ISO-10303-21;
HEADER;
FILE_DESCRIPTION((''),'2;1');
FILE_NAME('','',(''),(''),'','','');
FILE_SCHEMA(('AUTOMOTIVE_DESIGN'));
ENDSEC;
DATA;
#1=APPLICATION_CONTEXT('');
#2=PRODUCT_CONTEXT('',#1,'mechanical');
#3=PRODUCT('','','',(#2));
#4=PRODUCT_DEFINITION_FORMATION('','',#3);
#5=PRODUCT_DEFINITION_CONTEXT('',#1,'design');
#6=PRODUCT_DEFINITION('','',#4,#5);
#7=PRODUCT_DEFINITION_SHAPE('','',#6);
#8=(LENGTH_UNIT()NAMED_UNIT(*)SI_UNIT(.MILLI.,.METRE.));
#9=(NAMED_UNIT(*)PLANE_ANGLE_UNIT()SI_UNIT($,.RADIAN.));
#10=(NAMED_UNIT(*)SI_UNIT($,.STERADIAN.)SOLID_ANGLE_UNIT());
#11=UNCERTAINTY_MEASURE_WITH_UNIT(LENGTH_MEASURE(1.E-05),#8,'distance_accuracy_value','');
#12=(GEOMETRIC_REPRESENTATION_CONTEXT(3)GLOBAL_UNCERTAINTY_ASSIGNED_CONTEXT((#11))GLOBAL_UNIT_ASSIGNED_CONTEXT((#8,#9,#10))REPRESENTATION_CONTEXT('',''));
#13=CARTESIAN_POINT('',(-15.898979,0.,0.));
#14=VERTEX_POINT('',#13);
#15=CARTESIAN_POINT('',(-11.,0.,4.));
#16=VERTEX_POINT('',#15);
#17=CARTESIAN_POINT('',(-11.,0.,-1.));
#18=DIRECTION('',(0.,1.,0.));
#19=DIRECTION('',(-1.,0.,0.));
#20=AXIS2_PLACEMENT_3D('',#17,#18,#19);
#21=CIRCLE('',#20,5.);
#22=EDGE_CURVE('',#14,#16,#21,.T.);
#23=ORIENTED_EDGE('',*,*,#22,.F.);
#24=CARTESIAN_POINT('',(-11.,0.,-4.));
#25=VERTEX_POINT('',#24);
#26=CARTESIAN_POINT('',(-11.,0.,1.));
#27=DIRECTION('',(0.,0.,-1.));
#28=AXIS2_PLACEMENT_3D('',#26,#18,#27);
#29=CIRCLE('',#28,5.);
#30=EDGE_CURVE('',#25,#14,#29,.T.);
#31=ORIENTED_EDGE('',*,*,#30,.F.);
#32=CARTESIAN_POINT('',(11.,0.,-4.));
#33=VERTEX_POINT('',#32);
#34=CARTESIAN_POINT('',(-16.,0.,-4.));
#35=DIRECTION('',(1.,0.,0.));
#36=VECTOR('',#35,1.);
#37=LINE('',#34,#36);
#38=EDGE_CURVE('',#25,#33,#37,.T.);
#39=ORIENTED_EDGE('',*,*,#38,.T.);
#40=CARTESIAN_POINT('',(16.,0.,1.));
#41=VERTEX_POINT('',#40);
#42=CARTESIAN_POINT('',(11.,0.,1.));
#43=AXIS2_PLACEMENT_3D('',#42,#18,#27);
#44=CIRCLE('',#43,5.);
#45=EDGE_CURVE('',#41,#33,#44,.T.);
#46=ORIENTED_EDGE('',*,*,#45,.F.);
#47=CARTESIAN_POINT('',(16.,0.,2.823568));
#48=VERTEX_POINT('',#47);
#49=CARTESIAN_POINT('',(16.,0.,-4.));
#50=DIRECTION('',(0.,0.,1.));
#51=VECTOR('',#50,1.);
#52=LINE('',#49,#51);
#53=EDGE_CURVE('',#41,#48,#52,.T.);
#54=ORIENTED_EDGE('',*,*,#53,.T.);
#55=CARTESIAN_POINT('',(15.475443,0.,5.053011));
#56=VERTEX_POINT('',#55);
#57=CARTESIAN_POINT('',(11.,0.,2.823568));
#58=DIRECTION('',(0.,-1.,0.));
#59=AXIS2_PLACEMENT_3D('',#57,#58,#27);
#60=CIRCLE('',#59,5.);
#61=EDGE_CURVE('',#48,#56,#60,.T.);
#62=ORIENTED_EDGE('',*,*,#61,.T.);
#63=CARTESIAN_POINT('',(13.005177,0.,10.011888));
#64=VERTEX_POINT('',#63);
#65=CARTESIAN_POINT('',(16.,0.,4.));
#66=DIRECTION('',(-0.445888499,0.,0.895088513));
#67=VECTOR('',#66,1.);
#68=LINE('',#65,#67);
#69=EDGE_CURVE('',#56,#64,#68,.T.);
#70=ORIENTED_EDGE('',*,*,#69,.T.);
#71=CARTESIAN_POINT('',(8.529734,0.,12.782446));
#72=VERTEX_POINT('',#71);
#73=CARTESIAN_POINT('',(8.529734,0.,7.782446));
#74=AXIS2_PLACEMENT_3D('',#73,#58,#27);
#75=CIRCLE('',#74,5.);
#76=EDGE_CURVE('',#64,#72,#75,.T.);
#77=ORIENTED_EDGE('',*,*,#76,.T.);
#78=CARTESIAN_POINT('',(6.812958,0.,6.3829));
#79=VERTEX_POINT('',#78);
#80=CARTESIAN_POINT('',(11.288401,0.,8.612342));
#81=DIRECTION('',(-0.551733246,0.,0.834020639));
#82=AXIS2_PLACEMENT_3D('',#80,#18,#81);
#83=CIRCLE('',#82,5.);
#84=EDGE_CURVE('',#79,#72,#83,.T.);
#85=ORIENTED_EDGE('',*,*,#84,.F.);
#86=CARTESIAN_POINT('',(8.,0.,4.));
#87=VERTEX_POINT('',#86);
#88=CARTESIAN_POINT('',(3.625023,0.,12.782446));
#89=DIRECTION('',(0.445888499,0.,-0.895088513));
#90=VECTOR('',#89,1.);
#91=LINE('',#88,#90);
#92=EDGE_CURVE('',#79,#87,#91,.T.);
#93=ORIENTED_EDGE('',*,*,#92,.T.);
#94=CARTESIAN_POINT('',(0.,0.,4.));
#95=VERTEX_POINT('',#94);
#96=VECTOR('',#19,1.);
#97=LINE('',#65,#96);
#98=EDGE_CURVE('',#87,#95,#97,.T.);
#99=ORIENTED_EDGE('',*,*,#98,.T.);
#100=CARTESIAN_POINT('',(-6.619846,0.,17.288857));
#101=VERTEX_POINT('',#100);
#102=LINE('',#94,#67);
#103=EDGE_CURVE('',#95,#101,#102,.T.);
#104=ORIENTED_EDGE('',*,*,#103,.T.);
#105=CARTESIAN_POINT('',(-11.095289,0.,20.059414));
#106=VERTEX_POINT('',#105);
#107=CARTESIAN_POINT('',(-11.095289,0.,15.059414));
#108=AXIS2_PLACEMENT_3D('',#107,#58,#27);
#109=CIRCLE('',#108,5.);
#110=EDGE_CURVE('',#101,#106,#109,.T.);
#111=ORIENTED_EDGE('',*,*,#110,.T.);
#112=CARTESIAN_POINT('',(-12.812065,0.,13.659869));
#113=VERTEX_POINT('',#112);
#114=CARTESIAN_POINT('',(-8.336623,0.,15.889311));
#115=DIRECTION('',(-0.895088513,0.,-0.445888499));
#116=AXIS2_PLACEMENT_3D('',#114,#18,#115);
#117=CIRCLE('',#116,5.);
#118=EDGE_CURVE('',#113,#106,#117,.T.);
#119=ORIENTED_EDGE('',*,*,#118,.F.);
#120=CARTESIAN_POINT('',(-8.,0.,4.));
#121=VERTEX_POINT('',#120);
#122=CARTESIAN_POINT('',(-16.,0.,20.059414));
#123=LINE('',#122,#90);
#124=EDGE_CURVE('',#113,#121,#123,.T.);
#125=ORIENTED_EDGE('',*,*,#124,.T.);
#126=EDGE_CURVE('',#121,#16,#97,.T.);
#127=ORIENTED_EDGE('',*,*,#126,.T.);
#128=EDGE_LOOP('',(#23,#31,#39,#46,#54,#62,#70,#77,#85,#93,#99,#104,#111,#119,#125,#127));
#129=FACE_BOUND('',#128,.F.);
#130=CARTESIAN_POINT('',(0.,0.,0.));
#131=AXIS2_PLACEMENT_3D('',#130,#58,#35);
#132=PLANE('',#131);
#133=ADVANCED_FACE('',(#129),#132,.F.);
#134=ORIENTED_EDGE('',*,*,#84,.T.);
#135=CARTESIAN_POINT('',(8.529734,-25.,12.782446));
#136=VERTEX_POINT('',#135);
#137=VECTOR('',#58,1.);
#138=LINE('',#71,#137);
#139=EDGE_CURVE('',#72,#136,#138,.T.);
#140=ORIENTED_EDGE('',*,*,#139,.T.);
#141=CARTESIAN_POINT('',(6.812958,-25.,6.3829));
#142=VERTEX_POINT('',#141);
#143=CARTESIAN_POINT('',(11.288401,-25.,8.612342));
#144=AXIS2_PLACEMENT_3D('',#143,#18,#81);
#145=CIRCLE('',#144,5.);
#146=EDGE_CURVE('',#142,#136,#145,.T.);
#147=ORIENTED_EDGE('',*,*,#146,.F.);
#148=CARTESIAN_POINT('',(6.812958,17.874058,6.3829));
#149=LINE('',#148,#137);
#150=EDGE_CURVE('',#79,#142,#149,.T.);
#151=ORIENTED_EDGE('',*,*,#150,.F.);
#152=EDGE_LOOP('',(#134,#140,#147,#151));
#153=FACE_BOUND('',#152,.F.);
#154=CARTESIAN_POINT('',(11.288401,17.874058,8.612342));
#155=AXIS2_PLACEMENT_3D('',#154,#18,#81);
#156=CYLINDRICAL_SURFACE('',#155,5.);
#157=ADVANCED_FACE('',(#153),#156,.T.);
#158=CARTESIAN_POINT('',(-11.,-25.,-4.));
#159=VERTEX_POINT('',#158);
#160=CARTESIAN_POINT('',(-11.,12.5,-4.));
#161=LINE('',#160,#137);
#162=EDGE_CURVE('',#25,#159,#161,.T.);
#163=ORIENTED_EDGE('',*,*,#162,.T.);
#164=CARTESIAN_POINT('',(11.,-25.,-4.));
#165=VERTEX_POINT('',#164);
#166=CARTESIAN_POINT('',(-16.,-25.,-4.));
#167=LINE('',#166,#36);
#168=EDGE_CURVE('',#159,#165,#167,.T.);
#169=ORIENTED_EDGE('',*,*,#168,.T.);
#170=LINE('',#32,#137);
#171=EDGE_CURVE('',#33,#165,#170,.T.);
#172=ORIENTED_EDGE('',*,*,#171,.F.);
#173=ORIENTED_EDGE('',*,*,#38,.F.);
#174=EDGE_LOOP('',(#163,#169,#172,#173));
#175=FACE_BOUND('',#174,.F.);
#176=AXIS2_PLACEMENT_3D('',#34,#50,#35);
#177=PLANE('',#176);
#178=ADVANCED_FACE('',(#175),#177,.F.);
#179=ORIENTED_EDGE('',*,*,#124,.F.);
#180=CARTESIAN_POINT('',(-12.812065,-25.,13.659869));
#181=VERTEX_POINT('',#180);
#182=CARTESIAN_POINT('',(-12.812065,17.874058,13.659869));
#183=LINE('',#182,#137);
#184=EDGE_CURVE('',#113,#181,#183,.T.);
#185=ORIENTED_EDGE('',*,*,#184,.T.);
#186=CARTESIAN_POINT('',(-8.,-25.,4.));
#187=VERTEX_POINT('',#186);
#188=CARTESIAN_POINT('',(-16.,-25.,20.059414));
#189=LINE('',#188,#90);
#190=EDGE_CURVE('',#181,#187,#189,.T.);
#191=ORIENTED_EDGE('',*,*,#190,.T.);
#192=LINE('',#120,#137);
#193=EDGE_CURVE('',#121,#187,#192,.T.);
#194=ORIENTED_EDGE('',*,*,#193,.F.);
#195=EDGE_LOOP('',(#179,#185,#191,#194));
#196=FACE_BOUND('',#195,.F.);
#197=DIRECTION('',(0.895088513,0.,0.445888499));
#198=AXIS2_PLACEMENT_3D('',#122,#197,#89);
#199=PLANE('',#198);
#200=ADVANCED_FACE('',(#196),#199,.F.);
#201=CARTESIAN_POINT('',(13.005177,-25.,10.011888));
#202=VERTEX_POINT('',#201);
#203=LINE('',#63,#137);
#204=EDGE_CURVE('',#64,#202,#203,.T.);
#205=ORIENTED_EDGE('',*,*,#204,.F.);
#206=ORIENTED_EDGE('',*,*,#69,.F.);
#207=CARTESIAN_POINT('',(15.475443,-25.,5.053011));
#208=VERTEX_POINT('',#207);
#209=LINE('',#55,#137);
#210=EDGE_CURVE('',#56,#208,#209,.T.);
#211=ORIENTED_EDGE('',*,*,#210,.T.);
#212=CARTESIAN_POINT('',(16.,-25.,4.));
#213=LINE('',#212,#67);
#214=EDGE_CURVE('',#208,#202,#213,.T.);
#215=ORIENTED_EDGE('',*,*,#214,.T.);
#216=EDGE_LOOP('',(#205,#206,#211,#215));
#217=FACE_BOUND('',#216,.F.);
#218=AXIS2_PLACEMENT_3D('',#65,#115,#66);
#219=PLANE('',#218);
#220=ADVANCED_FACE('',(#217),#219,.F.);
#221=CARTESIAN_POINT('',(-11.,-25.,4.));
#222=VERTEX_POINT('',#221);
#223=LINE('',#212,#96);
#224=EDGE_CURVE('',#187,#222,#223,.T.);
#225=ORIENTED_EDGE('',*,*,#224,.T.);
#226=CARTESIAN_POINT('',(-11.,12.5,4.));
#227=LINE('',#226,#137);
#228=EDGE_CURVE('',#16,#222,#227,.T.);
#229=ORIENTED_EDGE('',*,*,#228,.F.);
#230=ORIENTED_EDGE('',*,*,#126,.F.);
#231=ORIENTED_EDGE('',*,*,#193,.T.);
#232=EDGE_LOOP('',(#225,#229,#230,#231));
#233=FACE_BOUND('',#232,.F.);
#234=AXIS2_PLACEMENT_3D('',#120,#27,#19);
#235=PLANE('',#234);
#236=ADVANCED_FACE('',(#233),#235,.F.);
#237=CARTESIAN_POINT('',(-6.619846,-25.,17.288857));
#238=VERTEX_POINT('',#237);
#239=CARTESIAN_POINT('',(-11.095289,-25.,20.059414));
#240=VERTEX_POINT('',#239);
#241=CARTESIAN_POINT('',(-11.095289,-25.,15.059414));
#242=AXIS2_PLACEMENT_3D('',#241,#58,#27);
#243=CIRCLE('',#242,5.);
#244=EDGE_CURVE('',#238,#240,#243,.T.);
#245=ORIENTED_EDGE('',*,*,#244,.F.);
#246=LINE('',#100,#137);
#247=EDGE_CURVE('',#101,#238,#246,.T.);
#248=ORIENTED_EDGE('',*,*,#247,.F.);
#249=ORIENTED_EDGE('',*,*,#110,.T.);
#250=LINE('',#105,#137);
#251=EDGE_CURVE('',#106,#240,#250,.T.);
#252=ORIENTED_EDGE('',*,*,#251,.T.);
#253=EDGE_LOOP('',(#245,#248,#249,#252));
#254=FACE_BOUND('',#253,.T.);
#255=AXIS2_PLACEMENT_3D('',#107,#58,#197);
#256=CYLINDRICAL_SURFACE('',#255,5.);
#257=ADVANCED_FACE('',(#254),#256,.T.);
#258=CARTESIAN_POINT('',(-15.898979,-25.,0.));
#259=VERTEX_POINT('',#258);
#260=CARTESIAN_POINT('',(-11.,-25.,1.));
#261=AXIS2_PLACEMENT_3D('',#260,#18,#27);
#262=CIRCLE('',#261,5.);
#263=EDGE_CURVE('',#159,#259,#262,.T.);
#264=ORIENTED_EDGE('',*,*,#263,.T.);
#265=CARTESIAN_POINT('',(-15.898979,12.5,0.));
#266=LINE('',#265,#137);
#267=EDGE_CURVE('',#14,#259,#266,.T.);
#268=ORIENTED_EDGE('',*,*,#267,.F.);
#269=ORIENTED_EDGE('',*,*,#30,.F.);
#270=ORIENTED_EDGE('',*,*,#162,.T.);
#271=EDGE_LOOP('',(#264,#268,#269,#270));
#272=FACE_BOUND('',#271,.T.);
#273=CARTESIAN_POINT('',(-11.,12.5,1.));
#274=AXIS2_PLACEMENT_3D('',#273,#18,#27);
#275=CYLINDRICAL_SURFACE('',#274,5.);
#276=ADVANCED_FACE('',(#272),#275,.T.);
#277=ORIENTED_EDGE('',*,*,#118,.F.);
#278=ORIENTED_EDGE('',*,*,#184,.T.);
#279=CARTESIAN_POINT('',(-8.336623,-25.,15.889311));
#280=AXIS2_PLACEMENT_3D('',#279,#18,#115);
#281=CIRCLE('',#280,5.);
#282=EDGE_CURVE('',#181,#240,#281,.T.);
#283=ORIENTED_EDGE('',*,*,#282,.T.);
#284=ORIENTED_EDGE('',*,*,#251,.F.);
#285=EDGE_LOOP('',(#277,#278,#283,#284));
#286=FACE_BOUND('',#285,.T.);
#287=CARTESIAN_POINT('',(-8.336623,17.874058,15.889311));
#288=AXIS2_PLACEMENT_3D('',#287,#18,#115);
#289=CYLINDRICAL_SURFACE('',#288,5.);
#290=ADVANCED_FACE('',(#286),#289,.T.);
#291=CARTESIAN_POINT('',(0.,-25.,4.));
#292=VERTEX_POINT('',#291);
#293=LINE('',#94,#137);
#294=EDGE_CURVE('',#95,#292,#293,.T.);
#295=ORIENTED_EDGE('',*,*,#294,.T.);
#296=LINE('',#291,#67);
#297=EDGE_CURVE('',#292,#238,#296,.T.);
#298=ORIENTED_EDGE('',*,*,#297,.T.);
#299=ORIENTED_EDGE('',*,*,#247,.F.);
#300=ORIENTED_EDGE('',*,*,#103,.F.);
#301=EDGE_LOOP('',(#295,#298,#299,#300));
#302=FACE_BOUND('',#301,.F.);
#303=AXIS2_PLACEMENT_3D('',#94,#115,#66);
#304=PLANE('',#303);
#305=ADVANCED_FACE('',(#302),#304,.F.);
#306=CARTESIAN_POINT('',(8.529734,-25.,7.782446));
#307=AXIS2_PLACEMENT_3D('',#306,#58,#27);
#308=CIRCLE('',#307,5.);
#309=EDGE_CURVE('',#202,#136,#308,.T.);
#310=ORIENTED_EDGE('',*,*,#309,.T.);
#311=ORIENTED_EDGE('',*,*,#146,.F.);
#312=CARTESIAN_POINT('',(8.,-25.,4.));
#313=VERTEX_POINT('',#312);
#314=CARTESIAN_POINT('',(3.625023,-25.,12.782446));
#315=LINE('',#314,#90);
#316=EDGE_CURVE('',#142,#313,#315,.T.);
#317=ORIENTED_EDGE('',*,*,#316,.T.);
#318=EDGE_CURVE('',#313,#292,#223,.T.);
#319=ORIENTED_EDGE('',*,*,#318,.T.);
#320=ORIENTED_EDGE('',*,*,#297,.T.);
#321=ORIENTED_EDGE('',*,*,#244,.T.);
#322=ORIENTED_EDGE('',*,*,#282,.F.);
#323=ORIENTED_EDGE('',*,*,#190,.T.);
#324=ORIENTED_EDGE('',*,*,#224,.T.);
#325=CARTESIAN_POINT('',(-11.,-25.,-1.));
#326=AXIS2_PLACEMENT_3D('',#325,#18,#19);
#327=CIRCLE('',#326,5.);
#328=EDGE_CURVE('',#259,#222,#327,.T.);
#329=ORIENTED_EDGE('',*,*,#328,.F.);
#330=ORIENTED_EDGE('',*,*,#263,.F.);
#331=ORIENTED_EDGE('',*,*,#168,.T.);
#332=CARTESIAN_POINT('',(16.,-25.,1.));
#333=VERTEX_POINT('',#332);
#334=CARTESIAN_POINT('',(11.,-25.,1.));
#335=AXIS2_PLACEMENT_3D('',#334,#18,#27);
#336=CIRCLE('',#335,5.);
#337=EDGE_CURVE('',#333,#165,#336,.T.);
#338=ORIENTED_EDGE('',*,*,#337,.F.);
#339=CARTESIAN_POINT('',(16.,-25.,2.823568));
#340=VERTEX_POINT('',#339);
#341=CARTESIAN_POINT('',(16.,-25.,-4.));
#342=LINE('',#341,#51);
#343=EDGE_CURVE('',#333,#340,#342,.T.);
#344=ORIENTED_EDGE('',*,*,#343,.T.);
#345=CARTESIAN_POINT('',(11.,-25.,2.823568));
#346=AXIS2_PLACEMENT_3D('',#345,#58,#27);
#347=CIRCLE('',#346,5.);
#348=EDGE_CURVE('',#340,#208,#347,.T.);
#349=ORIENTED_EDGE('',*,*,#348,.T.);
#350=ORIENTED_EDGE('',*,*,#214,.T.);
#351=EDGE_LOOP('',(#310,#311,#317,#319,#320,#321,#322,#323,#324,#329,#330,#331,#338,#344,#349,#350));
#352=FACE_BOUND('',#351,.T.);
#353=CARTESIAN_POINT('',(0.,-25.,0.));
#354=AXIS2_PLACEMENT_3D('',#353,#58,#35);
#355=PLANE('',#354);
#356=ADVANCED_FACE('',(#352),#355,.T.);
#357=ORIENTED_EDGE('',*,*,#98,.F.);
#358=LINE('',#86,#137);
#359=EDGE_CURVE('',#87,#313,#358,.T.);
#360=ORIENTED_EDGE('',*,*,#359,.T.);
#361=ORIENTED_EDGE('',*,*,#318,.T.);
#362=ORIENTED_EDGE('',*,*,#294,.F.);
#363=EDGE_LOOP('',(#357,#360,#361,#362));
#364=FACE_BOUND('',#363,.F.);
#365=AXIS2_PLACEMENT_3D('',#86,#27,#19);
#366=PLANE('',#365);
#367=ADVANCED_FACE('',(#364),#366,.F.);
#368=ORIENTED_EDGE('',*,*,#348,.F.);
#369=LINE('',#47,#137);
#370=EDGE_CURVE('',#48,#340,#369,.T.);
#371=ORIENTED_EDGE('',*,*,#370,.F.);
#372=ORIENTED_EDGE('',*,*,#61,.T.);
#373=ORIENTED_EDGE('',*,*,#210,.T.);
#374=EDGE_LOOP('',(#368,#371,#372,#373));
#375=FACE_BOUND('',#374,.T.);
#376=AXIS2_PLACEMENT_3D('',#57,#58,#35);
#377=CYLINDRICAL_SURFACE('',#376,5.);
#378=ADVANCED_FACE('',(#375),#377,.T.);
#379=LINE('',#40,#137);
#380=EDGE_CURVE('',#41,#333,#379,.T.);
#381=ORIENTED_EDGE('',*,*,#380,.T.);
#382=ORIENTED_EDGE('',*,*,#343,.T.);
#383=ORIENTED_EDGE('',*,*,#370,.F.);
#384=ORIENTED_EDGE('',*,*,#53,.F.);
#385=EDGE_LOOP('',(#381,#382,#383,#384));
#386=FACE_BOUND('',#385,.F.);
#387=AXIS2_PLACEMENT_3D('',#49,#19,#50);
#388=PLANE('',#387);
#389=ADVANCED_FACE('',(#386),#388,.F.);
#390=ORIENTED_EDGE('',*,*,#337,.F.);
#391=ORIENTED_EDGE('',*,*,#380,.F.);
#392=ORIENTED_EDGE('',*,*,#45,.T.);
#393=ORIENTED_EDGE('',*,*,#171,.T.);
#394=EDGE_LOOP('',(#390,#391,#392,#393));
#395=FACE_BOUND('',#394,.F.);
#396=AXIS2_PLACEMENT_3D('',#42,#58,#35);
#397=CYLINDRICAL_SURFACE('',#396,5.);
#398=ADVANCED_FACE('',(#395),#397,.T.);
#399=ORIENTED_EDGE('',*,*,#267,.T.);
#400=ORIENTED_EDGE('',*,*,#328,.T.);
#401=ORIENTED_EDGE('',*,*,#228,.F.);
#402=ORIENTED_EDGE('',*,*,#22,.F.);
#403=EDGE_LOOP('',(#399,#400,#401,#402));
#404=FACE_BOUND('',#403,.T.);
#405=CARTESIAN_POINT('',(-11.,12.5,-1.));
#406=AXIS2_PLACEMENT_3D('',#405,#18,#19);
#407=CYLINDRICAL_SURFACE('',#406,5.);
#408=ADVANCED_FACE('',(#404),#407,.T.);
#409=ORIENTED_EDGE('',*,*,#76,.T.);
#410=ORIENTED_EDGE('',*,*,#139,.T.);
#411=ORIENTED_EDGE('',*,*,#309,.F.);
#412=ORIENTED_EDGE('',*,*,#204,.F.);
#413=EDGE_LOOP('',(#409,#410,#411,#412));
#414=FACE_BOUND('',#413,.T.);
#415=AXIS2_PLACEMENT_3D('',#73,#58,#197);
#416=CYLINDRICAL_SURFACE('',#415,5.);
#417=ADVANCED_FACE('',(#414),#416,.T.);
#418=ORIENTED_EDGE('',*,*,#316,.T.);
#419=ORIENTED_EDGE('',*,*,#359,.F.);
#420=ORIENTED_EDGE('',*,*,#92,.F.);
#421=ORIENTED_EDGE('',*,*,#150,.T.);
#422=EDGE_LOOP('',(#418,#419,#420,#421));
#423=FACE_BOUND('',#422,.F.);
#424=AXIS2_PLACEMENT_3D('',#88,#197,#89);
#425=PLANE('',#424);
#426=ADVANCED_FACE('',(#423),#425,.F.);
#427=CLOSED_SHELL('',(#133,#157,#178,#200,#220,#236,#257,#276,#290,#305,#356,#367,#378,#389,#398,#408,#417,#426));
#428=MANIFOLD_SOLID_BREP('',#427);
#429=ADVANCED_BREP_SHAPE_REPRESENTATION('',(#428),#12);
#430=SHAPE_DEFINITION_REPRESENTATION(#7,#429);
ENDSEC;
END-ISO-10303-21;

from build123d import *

# Parameters (mm, degrees)
F1_DEPTH    = 25
F2_R        = 5
F3_T1_DEPTH = 60.7481164893
F3_T3_DEPTH = 50
F4_R        = 5


# Not quite as in the source:
# - a fillet or chamfer that OpenCascade refuses, or shapes differently, is made with other operations: its cross-section is extruded or revolved along the edge and cut away or added


with BuildPart() as f1:
    # F0 (on Front) → F1 (new body)
    with BuildSketch(Plane.XZ):
        Polygon((-16, -4), (16, -4), (16, 4), (8, 4), (0, 4), (-8, 4), (-16, 4), align=None)
        Polygon((8, 4), (16, 4), (11.6250231628, 12.7824456607), (3.6250231628, 12.7824456607), align=None)
        Polygon((-16, 20.0594142323), (-8, 4), (0, 4), (-8, 20.0594142323), align=None)
    extrude(amount=F1_DEPTH)

    # F2
    f2_edges = [f1.edges().sort_by_distance(p)[0] for p in [
        (-8, -12.5, 20.059414),
        (11.625023, -12.5, 12.782446),
        (16, -12.5, 4),
    ]]
    fillet(f2_edges, radius=F2_R)

    # F3: fillet of radius 5 on 4 edges, made by hand

    # F3_s2 → F3_t1 (cut)
    with BuildSketch(Plane.XZ.offset(-17.8740582446)):
        with BuildLine():
            ThreePointArc((8.529734301, 12.7824456607), (6.4591533037, 9.9078621452), (6.812957963, 6.3828999728))
            Line((6.812957963, 6.3828999728), (3.6250231628, 12.7824456607))
            Line((3.6250231628, 12.7824456607), (8.529734301, 12.7824456607))
        make_face()
        with BuildLine():
            ThreePointArc((-12.8120651998, 13.6598685445), (-13.1658698591, 17.1848307168), (-11.0952888618, 20.0594142323))
            Line((-11.0952888618, 20.0594142323), (-16, 20.0594142323))
            Line((-16, 20.0594142323), (-12.8120651998, 13.6598685445))
        make_face()
    extrude(amount=F3_T1_DEPTH, mode=Mode.SUBTRACT)

    # F3_s4 → F3_t3 (cut)
    with BuildSketch(Plane.XZ.offset(-12.5)):
        with BuildLine():
            ThreePointArc((-16, -1), (-14.5355339059, 2.5355339059), (-11, 4))
            Line((-11, 4), (-16, 4))
            Line((-16, 4), (-16, -1))
        make_face()
        with BuildLine():
            ThreePointArc((-11, -4), (-14.5355339059, -2.5355339059), (-16, 1))
            Line((-16, 1), (-16, -4))
            Line((-16, -4), (-11, -4))
        make_face()
    extrude(amount=F3_T3_DEPTH, mode=Mode.SUBTRACT)

    # F4
    f4_edges = [f1.edges().sort_by_distance(p)[0] for p in [
        (16, -12.5, -4),
    ]]
    fillet(f4_edges, radius=F4_R)


solid = f1.part
